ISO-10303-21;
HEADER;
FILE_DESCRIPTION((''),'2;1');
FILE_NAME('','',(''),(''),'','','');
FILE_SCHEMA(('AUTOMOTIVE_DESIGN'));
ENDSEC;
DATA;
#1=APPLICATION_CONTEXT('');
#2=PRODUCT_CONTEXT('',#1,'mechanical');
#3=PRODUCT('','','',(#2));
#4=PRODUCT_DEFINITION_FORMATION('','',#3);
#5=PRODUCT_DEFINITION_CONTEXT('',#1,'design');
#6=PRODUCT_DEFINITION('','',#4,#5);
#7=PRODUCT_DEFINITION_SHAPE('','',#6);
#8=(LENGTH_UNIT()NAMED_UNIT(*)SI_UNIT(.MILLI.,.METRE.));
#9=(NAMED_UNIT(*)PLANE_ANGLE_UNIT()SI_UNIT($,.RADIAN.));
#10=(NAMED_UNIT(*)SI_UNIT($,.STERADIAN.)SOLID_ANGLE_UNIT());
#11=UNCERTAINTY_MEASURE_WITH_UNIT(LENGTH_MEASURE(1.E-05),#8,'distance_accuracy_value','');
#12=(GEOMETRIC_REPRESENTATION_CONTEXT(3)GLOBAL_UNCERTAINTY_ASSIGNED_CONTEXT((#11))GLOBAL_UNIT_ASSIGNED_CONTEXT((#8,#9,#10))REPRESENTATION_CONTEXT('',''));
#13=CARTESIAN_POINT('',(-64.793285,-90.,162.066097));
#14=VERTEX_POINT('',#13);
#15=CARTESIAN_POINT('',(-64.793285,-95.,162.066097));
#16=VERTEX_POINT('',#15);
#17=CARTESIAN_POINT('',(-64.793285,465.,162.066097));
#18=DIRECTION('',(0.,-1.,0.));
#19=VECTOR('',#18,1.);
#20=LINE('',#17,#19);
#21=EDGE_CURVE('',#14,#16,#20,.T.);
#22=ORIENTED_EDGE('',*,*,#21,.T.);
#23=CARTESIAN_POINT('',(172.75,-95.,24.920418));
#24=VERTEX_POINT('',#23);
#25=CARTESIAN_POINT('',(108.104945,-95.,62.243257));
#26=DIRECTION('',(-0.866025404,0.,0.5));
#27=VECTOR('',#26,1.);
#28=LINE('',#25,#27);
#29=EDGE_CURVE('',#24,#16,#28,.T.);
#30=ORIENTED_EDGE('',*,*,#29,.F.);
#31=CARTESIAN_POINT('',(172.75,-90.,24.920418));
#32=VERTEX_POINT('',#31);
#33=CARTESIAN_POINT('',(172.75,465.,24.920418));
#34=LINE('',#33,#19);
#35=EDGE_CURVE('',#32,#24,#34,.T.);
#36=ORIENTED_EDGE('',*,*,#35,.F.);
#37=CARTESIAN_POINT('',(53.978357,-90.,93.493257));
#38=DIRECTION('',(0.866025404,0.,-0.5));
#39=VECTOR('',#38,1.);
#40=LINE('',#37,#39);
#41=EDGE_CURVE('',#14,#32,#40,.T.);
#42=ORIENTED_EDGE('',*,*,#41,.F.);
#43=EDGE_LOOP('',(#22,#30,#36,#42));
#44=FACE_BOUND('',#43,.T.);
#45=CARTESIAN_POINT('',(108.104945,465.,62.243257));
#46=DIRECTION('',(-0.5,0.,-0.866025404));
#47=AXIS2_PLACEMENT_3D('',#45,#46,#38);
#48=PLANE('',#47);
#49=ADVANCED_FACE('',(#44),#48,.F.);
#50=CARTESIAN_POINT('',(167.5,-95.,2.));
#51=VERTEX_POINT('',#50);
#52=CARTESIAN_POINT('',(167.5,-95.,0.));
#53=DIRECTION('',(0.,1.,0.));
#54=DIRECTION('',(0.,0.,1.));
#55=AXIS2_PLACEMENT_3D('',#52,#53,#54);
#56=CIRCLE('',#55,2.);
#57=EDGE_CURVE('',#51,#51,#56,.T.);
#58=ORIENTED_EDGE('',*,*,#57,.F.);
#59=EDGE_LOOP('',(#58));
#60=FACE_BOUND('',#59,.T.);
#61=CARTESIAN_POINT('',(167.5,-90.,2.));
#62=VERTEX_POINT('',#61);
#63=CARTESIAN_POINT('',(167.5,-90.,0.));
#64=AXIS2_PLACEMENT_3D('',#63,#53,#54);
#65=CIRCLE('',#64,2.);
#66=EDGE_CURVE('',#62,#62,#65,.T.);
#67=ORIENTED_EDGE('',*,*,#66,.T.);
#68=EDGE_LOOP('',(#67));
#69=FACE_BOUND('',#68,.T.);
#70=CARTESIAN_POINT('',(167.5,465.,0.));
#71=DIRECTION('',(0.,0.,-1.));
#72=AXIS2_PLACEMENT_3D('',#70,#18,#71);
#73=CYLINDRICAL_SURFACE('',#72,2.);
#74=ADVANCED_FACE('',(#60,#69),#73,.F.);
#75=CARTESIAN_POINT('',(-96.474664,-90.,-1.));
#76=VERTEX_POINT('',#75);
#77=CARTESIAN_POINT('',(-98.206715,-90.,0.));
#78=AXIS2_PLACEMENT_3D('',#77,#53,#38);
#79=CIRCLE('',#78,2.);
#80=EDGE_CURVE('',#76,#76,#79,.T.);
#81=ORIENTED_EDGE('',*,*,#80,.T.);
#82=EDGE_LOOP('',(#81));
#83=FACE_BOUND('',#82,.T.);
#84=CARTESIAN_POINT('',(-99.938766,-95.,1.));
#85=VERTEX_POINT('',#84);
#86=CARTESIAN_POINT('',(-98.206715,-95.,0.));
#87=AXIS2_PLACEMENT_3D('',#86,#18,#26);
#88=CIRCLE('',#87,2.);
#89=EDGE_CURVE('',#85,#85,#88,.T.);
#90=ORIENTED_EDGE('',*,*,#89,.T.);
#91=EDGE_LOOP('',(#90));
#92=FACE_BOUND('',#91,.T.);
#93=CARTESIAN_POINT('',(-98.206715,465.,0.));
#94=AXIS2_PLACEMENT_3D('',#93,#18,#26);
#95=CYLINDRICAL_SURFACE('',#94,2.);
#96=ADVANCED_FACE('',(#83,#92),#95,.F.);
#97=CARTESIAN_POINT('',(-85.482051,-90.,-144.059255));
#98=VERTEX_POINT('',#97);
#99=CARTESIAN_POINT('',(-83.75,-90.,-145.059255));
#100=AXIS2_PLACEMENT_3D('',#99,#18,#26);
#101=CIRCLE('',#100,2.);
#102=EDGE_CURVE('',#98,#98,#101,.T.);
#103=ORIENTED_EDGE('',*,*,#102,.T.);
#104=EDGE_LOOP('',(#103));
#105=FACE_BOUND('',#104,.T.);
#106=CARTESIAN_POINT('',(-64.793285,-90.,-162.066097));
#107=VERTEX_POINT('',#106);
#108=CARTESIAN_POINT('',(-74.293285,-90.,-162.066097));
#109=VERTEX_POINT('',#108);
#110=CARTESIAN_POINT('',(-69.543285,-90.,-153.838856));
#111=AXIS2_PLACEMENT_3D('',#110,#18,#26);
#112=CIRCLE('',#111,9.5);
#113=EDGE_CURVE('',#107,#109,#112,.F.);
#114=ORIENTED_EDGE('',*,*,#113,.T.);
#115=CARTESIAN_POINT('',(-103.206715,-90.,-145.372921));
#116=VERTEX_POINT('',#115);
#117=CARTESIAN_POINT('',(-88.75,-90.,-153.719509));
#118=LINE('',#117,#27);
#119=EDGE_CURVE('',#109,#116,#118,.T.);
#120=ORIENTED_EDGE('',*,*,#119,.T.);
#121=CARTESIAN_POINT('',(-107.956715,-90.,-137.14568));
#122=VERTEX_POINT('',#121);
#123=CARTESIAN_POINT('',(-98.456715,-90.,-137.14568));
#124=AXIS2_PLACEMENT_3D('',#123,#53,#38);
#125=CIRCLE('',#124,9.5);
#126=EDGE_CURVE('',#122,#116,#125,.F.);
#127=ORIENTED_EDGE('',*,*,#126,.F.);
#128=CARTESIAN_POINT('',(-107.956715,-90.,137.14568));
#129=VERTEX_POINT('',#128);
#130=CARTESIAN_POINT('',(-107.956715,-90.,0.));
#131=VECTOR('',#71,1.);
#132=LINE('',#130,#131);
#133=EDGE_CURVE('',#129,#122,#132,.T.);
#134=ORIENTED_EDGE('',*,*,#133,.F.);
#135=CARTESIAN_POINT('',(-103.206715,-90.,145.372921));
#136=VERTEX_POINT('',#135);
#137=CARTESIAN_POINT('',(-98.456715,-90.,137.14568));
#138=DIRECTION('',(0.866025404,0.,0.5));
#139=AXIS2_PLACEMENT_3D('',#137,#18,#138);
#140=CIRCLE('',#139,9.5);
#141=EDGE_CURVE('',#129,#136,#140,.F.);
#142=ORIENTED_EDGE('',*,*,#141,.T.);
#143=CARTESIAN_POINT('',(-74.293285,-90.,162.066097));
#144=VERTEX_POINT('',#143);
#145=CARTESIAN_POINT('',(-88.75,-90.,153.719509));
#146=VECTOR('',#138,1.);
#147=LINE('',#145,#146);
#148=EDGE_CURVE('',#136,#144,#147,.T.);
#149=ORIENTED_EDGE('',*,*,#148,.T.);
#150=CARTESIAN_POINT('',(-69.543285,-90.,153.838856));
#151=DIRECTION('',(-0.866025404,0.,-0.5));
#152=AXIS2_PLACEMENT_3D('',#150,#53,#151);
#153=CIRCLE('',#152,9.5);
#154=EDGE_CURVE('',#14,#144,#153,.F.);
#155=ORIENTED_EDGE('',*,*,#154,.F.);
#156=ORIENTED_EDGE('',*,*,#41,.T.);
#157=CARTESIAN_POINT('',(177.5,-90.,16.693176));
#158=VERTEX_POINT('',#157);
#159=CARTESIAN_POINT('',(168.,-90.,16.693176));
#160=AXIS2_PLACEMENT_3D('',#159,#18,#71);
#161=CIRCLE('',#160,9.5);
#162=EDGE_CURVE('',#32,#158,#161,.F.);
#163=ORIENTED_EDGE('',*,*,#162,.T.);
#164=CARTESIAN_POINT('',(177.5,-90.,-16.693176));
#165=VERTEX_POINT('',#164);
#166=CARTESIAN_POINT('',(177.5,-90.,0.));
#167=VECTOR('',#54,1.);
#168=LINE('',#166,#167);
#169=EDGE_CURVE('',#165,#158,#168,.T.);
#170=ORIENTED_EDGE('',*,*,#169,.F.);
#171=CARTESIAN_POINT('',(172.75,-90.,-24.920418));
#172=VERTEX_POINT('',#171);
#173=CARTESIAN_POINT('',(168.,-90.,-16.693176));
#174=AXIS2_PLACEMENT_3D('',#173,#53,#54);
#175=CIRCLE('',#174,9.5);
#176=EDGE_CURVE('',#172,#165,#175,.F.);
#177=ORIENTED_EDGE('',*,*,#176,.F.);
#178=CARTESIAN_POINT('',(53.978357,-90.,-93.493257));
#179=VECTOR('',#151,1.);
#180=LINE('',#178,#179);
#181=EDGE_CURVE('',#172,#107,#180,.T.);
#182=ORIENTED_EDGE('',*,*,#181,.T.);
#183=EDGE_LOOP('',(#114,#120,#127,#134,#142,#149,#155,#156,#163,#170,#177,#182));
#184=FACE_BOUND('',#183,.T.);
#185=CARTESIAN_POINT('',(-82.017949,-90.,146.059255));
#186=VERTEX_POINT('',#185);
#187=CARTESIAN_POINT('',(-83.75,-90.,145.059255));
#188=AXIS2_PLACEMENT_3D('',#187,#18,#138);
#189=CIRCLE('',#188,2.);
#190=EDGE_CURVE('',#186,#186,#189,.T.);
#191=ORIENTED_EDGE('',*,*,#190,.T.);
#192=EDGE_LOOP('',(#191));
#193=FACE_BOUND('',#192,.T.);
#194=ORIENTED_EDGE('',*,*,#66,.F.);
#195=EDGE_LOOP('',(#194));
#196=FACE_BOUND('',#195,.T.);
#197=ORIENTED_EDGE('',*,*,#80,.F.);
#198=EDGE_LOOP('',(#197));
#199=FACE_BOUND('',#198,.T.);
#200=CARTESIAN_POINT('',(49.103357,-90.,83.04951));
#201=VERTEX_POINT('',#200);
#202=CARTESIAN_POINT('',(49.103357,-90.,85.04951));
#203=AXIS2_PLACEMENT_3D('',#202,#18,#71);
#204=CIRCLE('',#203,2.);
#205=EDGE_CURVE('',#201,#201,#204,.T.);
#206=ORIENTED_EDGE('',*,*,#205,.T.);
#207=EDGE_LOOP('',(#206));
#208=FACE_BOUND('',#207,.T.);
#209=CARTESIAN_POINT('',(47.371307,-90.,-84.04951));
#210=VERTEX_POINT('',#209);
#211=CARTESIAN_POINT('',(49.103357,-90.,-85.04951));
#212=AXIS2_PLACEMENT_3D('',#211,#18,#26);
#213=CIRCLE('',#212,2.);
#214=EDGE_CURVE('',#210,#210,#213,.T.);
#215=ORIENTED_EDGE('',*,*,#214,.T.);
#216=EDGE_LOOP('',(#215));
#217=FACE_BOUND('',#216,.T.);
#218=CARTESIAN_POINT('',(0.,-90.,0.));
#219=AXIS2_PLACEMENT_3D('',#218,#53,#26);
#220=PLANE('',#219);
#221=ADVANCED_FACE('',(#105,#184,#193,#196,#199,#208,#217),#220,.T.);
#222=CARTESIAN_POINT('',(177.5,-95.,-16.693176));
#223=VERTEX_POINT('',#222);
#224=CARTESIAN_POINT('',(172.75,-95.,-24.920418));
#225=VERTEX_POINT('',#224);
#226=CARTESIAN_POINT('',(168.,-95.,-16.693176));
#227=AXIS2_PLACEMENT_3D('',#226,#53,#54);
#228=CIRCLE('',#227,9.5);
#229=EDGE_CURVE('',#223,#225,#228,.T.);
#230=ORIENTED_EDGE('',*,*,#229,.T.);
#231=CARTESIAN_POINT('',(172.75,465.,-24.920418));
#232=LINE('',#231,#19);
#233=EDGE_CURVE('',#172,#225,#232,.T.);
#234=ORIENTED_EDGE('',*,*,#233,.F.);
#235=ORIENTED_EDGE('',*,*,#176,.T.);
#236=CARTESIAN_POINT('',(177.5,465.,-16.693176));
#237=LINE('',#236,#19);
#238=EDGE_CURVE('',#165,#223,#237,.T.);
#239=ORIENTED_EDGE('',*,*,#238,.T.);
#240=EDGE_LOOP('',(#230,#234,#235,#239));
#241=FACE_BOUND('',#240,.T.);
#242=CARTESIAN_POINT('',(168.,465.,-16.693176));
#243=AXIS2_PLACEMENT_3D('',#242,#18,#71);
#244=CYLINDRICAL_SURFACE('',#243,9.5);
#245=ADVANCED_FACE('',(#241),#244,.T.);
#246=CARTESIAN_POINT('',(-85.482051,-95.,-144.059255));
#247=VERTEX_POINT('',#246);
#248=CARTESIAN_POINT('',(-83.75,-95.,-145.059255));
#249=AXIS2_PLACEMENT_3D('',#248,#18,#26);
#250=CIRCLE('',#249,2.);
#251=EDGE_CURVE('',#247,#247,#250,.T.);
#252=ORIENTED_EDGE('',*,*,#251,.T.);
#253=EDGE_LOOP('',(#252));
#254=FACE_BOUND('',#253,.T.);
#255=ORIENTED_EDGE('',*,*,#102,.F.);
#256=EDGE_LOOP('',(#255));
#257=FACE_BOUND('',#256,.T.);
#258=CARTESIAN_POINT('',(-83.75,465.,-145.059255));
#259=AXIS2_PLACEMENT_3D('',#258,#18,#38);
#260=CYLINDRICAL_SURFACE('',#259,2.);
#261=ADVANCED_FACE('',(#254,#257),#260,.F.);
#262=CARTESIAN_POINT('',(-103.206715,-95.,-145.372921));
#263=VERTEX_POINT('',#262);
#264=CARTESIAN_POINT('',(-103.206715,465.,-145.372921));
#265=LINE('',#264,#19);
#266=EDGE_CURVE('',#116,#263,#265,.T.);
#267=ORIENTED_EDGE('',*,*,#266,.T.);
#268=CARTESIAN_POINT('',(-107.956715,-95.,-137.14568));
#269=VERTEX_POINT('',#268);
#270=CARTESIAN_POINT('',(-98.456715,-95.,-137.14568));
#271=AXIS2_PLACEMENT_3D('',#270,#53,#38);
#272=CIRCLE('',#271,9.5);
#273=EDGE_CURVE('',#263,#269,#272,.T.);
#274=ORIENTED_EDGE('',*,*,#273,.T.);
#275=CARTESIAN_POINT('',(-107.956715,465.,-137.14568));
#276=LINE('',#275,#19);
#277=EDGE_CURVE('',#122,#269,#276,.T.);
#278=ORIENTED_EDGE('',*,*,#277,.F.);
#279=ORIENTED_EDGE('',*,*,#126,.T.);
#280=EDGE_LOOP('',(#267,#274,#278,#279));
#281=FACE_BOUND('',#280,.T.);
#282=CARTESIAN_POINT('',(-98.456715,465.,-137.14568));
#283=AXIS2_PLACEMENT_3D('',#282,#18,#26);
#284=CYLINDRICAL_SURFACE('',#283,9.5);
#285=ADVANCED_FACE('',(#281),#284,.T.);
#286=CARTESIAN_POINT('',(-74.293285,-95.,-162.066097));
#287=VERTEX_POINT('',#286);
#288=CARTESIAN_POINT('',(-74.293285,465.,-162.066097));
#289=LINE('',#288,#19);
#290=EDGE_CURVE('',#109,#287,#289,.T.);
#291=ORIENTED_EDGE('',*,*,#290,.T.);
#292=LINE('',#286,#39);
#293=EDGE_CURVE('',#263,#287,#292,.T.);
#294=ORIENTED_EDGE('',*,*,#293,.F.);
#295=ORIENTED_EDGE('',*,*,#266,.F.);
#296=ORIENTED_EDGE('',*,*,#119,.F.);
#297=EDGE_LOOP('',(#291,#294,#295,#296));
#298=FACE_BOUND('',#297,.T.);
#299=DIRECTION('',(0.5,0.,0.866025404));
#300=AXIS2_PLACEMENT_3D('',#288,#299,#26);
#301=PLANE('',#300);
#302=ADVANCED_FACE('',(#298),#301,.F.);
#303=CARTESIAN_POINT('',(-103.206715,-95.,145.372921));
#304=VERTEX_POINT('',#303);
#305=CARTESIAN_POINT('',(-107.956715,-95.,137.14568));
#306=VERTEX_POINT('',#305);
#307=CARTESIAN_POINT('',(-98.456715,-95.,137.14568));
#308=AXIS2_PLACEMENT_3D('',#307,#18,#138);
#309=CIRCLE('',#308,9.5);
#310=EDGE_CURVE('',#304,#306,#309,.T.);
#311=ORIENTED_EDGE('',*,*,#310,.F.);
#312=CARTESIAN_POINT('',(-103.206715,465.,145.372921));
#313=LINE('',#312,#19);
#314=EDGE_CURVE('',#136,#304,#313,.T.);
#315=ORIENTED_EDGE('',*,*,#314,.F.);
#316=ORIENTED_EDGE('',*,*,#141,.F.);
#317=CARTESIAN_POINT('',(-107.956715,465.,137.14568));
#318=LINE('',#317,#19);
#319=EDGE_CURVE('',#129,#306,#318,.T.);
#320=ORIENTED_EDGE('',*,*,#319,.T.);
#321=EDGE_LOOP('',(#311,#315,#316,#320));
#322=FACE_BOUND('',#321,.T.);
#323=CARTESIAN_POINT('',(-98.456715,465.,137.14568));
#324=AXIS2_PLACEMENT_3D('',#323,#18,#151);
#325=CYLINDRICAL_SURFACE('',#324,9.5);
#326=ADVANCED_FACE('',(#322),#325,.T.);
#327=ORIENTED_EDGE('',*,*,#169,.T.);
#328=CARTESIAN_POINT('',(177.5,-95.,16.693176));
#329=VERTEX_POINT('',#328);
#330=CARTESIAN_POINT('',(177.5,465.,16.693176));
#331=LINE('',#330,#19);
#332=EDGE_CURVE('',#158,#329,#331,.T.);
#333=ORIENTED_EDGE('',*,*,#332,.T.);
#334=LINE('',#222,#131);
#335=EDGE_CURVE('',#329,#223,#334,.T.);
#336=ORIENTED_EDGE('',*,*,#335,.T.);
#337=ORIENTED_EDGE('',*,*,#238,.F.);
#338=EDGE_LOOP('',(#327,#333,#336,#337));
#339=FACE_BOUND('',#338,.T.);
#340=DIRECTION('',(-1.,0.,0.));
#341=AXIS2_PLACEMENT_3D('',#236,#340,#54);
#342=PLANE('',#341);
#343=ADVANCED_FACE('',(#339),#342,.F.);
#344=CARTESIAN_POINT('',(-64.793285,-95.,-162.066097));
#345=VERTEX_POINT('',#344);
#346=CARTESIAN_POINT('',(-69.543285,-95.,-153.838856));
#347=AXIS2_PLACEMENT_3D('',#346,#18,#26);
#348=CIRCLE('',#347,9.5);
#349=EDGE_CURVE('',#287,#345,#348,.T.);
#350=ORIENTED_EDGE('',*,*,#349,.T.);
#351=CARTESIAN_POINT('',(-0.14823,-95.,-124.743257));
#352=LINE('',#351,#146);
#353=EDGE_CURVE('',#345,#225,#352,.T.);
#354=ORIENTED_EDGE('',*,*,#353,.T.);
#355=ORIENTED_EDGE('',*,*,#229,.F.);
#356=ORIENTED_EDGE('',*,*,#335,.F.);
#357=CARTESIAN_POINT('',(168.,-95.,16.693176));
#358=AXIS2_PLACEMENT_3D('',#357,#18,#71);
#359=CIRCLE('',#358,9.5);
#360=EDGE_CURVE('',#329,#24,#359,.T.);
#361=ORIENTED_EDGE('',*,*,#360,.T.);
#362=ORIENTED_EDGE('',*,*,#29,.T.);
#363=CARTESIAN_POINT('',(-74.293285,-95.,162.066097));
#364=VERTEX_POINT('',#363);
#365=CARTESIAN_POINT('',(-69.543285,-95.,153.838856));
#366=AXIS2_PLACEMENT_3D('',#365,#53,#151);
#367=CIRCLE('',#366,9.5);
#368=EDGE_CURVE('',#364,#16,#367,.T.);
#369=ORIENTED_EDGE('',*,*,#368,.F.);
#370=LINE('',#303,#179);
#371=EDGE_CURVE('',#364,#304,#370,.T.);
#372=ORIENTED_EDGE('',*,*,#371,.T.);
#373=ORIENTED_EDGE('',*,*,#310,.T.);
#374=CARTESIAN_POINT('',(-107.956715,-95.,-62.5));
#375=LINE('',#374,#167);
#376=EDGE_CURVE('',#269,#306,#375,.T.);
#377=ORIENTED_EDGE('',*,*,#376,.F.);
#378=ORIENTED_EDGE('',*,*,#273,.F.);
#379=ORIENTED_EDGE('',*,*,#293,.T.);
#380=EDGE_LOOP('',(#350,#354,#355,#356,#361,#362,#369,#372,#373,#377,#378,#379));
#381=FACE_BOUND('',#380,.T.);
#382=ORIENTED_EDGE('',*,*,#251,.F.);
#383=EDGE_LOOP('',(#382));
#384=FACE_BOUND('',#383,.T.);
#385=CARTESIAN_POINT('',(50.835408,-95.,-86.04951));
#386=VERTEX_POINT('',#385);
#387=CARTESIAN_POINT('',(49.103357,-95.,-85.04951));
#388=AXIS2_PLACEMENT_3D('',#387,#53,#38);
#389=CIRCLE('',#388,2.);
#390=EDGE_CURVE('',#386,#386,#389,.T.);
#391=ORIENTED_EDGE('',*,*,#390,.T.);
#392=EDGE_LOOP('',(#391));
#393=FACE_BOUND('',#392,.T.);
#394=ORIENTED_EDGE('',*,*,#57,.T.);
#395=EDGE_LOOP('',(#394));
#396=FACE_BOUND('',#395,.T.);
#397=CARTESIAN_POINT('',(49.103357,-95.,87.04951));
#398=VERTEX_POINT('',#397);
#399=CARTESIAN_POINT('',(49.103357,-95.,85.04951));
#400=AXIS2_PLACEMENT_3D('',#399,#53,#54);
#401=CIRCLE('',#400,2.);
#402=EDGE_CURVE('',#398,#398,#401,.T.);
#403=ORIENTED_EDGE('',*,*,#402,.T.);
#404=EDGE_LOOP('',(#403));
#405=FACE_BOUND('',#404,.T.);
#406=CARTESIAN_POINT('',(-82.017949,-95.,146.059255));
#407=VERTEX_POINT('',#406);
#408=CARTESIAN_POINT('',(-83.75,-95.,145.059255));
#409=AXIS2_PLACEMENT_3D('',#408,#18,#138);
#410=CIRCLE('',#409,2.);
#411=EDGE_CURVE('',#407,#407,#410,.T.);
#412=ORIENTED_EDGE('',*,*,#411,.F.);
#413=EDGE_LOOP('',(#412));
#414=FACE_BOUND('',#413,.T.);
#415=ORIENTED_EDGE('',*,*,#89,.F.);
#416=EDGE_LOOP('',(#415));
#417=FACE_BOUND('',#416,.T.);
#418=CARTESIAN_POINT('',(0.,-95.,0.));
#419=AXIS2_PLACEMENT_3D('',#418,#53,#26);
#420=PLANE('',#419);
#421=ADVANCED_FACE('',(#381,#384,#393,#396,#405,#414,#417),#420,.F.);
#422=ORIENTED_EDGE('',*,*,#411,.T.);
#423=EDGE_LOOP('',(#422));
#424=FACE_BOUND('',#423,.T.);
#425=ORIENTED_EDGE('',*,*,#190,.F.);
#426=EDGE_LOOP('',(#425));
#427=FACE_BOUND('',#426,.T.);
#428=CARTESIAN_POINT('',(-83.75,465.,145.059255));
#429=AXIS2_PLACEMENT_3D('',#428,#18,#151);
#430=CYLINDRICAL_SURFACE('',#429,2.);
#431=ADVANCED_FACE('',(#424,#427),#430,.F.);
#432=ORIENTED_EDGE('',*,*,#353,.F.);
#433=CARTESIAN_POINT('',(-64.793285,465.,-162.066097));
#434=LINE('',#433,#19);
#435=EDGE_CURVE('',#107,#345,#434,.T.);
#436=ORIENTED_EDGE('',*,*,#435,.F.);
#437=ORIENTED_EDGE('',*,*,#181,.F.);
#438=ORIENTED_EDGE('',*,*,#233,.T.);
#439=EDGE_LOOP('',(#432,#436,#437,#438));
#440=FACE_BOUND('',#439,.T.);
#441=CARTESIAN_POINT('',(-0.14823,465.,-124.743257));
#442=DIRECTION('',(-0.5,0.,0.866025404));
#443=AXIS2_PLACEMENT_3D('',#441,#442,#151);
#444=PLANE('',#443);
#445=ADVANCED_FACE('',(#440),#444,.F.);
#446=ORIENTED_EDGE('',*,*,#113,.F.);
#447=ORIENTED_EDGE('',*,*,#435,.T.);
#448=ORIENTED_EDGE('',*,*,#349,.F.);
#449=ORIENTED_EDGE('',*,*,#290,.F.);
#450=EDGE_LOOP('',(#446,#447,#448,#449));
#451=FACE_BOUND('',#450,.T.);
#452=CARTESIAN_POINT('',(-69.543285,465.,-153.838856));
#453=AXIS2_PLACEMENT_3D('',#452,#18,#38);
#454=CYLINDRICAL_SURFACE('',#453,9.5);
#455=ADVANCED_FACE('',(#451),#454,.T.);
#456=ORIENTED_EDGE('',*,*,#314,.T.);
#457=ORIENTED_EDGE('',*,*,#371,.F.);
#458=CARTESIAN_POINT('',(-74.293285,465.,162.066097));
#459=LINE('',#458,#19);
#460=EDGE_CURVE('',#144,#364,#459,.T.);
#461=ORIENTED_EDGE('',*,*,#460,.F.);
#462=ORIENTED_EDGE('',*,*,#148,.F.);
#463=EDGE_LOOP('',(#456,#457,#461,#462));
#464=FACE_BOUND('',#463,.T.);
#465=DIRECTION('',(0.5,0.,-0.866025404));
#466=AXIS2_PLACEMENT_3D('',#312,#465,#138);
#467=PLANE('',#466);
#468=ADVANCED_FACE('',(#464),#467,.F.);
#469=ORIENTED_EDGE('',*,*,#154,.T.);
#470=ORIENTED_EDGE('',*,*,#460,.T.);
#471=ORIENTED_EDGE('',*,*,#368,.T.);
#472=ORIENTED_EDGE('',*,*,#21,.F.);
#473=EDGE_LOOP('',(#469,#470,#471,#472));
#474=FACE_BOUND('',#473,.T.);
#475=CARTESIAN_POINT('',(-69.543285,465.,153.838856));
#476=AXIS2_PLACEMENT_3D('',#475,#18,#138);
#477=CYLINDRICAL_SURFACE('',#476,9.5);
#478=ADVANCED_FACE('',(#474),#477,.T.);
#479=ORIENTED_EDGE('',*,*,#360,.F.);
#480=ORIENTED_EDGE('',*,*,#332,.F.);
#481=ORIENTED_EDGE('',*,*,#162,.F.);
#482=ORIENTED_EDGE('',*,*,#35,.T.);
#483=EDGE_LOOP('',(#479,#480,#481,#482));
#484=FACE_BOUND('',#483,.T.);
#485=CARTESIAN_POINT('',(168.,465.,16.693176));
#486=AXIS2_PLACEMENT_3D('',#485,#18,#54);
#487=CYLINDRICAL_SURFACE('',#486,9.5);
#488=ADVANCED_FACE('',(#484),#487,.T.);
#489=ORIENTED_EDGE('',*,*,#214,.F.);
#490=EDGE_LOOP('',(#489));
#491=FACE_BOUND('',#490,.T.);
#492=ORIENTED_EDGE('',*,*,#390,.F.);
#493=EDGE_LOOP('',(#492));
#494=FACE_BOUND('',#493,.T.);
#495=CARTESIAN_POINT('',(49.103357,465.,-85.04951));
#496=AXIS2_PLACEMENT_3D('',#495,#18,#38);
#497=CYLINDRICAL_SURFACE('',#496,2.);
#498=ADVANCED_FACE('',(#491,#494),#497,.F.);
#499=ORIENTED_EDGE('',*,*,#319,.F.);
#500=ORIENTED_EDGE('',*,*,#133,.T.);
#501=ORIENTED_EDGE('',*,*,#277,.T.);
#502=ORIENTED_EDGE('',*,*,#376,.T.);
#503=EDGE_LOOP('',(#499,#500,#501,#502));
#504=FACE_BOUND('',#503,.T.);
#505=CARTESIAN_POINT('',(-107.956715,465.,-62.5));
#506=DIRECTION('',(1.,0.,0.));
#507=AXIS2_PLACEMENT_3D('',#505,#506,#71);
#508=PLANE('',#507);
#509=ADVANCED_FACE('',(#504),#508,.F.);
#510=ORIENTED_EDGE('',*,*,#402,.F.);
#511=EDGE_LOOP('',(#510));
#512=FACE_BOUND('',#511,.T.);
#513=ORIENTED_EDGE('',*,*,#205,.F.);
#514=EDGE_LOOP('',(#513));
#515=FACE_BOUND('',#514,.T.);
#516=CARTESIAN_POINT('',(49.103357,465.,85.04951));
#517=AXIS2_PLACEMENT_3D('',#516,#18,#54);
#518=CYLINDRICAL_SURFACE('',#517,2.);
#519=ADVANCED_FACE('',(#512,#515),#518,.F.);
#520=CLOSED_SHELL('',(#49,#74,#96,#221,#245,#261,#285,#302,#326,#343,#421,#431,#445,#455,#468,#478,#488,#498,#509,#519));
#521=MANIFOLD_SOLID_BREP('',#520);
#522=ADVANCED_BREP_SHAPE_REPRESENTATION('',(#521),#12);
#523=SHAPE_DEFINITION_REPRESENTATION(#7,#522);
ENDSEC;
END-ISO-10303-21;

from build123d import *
from build123d.topology import SkipClean

# Parameters (mm, degrees)
STOCK_FRAME_START          = -95
STOCK_FRAME_MASTER_1_DEPTH = 5


# Read off the part's stored shape, not the designer's step: Stock-Frame master-1
with BuildPart() as part:
    # Stock-Frame master-1 outline → Stock-Frame master-1 (new body)
    with BuildSketch(Plane(origin=(0, 0, 0), x_dir=(1, 0, 0), z_dir=(0, 1, 0)).offset(STOCK_FRAME_START)):
        with BuildLine():
            Line((48.103357378, 83.317458993), (0, 0))
            Line((0, 0), (165.5, 0))
            ThreePointArc((165.5, 0), (167.5, 2), (169.5, 0))
            Line((169.5, 0), (177.5, 0))
            Line((177.5, 0), (177.5, 16.693176311))
            ThreePointArc((177.5, 16.693176311), (176.227241336, 21.443176311), (172.75, 24.920417647))
            Line((172.75, 24.920417647), (53.978357378, 93.493257487))
            Line((53.978357378, 93.493257487), (50.103357378, 86.781560608))
            ThreePointArc((50.103357378, 86.781560608), (50.835408185, 84.049509801), (48.103357378, 83.317458993))
        make_face()
    extrude(amount=STOCK_FRAME_MASTER_1_DEPTH)

    # Mirror1: part across plane


with BuildPart() as part_1:
    with SkipClean():  # the faces are left unmerged after this step: merging them gives an invalid solid
        add(part.part)
        add(part.part.mirror(Plane(origin=(220, -90, 0), x_dir=(1, 0, 0), z_dir=(0, 0, -1))))


with BuildPart() as body_2:
    # Mirror2: mirrored copy
    add(part_1.part.mirror(Plane(origin=(0, -90, 0), x_dir=(-0.49999999999999406, 0, 0.866025403784442), z_dir=(0.8660254037844419, 0, 0.4999999999999941))))


with BuildPart() as part_2:
    with SkipClean():  # the faces are left unmerged after this step: merging them gives an invalid solid
        add(part_1.part)

        # Mirror3: part across plane
        add(part_1.part.mirror(Plane(origin=(0, -90, 0), x_dir=(0.49999999999999406, 0, 0.866025403784442), z_dir=(0.8660254037844419, 0, -0.4999999999999941))))


with BuildPart() as body_2_1:
    add(body_2.part)

    # Combine1: union part
    add(part_2.part)


solid = body_2_1.part
